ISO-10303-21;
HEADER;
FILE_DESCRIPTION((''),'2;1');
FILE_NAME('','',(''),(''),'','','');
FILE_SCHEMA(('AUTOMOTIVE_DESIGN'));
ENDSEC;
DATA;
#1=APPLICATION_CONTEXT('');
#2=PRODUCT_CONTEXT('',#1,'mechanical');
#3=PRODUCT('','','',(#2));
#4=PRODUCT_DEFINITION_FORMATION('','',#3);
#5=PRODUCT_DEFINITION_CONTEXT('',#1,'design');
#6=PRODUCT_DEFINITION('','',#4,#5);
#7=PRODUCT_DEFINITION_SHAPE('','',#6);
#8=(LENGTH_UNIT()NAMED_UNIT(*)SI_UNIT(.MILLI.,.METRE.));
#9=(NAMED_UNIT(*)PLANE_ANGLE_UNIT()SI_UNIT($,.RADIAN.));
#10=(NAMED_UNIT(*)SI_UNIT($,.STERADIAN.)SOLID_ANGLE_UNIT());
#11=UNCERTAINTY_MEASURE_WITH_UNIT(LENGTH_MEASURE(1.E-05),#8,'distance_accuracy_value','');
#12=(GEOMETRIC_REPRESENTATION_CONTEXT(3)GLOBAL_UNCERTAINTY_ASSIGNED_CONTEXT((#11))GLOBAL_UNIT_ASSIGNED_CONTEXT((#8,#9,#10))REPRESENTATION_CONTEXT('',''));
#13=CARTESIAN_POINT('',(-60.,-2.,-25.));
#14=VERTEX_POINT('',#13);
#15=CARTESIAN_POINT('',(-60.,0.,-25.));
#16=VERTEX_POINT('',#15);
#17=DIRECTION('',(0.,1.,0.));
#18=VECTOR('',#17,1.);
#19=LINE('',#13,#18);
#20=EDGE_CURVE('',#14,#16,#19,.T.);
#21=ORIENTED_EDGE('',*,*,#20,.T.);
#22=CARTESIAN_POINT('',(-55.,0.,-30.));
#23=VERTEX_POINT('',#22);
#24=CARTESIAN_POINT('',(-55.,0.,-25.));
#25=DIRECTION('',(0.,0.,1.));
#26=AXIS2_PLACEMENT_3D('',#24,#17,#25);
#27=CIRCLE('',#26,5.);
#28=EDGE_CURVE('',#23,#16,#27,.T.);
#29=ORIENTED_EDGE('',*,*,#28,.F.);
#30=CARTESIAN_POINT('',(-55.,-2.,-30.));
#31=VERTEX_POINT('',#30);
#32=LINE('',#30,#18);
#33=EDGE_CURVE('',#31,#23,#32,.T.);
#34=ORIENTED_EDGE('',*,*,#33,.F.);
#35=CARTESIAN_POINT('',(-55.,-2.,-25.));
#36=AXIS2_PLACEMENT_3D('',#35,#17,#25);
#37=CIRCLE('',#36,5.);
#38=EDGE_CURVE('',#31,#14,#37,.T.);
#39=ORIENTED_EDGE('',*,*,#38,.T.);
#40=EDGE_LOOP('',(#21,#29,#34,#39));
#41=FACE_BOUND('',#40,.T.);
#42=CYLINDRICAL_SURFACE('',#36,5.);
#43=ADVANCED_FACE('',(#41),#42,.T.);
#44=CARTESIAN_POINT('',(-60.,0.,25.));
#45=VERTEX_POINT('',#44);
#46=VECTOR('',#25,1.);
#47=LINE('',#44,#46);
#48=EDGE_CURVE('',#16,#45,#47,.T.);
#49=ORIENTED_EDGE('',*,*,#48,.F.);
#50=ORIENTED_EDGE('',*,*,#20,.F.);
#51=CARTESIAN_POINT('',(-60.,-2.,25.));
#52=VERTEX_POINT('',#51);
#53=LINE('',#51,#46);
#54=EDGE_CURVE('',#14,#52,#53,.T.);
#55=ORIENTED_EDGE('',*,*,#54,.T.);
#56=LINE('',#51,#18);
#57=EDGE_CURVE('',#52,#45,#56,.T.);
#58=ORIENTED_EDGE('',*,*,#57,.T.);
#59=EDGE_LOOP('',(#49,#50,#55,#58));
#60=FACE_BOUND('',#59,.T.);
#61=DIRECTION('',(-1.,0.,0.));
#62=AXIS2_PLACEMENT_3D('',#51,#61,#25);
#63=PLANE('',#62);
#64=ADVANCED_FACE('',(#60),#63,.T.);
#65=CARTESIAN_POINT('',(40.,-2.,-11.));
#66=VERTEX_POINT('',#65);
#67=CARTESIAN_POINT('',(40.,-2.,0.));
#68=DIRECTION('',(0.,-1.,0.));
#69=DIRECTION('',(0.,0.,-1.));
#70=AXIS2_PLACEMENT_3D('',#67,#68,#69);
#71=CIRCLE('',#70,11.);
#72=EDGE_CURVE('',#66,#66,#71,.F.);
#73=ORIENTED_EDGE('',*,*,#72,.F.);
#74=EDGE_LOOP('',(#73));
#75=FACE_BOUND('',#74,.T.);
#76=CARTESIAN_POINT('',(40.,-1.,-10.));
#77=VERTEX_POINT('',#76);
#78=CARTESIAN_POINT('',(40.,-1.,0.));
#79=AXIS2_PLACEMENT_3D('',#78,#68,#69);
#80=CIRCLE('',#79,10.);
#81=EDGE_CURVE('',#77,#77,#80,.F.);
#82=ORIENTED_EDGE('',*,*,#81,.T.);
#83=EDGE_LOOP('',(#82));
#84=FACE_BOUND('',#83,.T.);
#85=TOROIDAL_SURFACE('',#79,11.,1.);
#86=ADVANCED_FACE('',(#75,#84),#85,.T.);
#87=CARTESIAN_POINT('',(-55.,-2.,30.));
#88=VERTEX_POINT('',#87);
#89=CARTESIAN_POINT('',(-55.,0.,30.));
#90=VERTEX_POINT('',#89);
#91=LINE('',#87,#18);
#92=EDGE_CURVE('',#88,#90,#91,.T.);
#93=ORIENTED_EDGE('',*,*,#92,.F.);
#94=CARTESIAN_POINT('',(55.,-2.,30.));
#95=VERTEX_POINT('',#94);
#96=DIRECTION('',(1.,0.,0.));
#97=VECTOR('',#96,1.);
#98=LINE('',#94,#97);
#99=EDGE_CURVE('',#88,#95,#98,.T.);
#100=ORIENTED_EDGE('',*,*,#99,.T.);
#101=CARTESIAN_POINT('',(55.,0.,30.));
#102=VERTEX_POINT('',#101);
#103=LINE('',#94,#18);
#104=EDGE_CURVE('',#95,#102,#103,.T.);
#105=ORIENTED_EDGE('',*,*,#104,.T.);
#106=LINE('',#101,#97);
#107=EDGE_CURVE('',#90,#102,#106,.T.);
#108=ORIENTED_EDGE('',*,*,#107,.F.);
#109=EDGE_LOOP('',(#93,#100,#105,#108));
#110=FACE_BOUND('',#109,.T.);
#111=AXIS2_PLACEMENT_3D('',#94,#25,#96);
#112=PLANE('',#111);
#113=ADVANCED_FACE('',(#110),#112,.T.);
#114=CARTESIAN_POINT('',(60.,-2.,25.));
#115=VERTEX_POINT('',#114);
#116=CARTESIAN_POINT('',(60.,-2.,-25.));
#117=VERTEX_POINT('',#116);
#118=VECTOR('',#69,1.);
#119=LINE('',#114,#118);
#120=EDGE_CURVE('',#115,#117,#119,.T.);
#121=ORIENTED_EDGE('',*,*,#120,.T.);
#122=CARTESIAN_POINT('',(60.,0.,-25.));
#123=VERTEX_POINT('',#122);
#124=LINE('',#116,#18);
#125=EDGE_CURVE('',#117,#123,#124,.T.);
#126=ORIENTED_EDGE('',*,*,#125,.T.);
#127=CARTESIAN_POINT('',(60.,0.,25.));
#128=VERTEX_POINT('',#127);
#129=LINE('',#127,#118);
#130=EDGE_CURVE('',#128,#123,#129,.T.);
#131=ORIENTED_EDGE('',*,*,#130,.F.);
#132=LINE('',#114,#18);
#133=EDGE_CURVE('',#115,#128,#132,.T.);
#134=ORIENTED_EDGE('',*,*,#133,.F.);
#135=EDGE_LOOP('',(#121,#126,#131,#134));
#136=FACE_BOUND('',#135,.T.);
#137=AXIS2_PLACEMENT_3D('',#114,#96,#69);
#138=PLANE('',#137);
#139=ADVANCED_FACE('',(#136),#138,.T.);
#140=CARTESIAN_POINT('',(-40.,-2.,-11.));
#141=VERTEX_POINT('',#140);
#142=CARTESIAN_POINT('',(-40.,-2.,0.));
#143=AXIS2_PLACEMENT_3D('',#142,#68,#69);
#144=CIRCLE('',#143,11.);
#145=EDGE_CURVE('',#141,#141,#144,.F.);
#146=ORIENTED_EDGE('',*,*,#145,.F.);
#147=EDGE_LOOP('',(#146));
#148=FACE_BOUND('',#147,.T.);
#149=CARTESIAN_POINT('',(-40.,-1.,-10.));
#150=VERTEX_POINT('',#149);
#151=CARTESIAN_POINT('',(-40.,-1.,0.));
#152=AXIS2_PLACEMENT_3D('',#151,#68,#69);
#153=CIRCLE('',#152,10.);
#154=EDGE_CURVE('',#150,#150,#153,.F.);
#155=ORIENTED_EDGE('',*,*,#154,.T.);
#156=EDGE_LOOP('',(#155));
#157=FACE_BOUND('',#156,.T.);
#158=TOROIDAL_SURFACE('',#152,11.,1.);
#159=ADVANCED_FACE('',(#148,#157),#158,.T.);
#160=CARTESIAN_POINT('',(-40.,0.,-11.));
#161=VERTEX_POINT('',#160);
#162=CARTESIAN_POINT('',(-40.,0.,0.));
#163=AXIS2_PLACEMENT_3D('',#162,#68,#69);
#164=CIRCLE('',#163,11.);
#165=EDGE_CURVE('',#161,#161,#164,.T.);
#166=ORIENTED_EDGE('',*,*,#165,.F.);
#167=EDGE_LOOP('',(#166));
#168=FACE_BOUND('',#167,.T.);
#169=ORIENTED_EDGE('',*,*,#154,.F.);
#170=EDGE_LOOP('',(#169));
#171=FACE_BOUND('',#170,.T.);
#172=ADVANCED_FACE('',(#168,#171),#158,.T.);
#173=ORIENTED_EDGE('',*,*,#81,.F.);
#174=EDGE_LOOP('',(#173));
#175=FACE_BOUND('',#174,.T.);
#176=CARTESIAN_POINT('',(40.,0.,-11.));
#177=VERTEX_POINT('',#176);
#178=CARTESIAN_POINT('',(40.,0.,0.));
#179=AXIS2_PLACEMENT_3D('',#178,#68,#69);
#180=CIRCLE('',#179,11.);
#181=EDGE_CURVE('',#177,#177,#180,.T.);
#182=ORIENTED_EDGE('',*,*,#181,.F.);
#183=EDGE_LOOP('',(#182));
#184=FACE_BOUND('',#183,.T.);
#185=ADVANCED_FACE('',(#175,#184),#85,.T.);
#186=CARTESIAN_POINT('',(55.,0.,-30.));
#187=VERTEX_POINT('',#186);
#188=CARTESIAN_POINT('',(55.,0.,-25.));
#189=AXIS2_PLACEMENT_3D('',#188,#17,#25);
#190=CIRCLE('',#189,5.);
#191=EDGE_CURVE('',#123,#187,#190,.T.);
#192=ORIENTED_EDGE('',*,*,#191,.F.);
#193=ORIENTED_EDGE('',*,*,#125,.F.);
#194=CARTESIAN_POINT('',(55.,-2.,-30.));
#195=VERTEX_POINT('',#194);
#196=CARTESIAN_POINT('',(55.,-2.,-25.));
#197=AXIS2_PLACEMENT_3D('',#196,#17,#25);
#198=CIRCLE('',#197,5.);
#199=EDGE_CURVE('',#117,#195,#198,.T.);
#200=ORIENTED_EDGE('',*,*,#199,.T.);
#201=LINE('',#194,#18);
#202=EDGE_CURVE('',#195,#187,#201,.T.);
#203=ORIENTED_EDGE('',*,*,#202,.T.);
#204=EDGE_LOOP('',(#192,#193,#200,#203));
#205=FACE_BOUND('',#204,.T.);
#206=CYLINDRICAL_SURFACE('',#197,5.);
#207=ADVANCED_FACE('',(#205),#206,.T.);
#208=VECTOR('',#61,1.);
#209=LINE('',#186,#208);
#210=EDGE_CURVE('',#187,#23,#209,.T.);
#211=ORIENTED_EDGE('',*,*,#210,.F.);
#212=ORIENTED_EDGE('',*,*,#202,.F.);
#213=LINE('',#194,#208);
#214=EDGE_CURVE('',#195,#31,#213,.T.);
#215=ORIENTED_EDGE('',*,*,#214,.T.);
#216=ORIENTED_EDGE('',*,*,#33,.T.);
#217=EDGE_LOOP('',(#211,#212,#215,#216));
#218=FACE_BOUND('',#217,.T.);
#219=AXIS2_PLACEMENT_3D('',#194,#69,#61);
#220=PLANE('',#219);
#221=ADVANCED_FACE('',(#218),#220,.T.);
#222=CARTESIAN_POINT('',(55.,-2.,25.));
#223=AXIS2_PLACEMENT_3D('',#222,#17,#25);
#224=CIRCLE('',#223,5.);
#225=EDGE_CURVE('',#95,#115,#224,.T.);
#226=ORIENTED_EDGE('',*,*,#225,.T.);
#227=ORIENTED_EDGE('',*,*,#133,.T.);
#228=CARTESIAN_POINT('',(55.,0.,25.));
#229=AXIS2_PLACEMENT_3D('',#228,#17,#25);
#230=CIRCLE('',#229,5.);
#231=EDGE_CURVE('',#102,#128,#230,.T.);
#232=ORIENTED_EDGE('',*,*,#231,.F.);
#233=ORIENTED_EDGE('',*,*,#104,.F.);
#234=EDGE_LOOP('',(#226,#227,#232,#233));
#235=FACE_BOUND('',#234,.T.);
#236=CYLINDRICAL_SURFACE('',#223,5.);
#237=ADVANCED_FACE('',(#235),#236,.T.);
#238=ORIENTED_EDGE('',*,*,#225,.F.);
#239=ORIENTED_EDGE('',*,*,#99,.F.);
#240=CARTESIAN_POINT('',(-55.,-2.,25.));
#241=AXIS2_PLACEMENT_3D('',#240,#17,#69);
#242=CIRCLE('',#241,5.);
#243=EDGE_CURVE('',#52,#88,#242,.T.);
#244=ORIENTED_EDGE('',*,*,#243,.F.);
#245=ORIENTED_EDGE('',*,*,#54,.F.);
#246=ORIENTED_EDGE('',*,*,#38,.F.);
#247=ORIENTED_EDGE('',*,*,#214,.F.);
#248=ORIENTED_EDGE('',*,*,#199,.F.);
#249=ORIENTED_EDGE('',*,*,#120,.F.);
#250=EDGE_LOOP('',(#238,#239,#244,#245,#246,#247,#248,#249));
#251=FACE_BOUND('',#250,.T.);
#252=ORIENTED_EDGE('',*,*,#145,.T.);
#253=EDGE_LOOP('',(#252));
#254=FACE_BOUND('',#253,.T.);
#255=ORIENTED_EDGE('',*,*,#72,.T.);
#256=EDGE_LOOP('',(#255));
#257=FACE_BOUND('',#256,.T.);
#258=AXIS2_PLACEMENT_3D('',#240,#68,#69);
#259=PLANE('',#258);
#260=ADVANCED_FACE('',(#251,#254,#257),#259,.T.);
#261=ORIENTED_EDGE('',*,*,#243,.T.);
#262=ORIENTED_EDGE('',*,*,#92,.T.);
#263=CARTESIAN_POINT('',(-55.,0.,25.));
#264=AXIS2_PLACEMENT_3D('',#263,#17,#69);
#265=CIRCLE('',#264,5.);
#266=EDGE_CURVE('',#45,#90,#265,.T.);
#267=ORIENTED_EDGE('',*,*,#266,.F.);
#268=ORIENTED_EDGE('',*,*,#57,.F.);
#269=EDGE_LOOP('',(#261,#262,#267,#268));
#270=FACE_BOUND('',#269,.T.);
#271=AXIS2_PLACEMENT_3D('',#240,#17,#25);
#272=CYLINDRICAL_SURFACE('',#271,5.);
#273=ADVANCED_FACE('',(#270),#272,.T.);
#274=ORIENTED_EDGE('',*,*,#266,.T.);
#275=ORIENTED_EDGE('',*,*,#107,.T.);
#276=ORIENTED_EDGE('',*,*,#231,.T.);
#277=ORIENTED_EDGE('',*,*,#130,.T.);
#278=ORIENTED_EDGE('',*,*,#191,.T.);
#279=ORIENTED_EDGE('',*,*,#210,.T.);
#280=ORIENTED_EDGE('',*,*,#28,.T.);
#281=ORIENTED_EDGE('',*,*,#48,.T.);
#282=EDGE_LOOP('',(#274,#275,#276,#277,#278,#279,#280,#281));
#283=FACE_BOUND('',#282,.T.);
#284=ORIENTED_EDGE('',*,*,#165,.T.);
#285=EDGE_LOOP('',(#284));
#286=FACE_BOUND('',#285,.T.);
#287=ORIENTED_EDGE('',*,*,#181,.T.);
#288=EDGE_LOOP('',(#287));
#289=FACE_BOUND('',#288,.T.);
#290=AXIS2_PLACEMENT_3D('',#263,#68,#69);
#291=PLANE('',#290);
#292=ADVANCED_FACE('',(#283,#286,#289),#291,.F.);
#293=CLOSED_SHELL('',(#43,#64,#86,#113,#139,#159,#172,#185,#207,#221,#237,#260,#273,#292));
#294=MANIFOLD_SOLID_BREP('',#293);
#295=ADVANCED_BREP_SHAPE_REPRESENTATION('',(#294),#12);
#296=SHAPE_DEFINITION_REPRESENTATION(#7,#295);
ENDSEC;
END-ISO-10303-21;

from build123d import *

# Parameters (mm, degrees)
SKETCH1_R          = 10
BASE_FLANGE1_DEPTH = 2
FILLET1_R          = 1
FILLET2_R          = 1
FILLET3_R          = 1


# Sheet-metal steps are written as plain solids
with BuildPart() as part:
    # Sketch1 → Base-Flange1 (new body)
    with BuildSketch(Plane(origin=(0, 0, 0), x_dir=(1, 0, 0), z_dir=(0, 1, 0))):
        with BuildLine():
            Line((55, -30), (-55, -30))
            ThreePointArc((-55, -30), (-58.535533906, -28.535533906), (-60, -25))
            Line((-60, -25), (-60, 25))
            ThreePointArc((-60, 25), (-58.535533906, 28.535533906), (-55, 30))
            Line((-55, 30), (55, 30))
            ThreePointArc((55, 30), (58.535533906, 28.535533906), (60, 25))
            Line((60, 25), (60, -25))
            ThreePointArc((60, -25), (58.535533906, -28.535533906), (55, -30))
        make_face()
        with Locations(Location((-40, 0, 0), (0, 0, 270))):
            Circle(SKETCH1_R, mode=Mode.SUBTRACT)
        with Locations(Location((40, 0, 0), (0, 0, 270))):
            Circle(SKETCH1_R, mode=Mode.SUBTRACT)
    extrude(amount=-BASE_FLANGE1_DEPTH)

    # Fillet1
    fillet1_edges = [part.edges().sort_by_distance(p)[0] for p in [
        (-40, 0, -10),
        (40, 0, -10),
    ]]
    fillet(fillet1_edges, radius=FILLET1_R)

    # Fillet2
    fillet2_edges = [part.edges().sort_by_distance(p)[0] for p in [
        (-40, -2, -10),
    ]]
    fillet(fillet2_edges, radius=FILLET2_R - 0.0001)  # a hair under: the kernel refuses the full size

    # Fillet3
    fillet3_edges = [part.edges().sort_by_distance(p)[0] for p in [
        (40, -2, -10),
    ]]
    fillet(fillet3_edges, radius=FILLET3_R - 0.0001)  # a hair under: the kernel refuses the full size


solid = part.part
